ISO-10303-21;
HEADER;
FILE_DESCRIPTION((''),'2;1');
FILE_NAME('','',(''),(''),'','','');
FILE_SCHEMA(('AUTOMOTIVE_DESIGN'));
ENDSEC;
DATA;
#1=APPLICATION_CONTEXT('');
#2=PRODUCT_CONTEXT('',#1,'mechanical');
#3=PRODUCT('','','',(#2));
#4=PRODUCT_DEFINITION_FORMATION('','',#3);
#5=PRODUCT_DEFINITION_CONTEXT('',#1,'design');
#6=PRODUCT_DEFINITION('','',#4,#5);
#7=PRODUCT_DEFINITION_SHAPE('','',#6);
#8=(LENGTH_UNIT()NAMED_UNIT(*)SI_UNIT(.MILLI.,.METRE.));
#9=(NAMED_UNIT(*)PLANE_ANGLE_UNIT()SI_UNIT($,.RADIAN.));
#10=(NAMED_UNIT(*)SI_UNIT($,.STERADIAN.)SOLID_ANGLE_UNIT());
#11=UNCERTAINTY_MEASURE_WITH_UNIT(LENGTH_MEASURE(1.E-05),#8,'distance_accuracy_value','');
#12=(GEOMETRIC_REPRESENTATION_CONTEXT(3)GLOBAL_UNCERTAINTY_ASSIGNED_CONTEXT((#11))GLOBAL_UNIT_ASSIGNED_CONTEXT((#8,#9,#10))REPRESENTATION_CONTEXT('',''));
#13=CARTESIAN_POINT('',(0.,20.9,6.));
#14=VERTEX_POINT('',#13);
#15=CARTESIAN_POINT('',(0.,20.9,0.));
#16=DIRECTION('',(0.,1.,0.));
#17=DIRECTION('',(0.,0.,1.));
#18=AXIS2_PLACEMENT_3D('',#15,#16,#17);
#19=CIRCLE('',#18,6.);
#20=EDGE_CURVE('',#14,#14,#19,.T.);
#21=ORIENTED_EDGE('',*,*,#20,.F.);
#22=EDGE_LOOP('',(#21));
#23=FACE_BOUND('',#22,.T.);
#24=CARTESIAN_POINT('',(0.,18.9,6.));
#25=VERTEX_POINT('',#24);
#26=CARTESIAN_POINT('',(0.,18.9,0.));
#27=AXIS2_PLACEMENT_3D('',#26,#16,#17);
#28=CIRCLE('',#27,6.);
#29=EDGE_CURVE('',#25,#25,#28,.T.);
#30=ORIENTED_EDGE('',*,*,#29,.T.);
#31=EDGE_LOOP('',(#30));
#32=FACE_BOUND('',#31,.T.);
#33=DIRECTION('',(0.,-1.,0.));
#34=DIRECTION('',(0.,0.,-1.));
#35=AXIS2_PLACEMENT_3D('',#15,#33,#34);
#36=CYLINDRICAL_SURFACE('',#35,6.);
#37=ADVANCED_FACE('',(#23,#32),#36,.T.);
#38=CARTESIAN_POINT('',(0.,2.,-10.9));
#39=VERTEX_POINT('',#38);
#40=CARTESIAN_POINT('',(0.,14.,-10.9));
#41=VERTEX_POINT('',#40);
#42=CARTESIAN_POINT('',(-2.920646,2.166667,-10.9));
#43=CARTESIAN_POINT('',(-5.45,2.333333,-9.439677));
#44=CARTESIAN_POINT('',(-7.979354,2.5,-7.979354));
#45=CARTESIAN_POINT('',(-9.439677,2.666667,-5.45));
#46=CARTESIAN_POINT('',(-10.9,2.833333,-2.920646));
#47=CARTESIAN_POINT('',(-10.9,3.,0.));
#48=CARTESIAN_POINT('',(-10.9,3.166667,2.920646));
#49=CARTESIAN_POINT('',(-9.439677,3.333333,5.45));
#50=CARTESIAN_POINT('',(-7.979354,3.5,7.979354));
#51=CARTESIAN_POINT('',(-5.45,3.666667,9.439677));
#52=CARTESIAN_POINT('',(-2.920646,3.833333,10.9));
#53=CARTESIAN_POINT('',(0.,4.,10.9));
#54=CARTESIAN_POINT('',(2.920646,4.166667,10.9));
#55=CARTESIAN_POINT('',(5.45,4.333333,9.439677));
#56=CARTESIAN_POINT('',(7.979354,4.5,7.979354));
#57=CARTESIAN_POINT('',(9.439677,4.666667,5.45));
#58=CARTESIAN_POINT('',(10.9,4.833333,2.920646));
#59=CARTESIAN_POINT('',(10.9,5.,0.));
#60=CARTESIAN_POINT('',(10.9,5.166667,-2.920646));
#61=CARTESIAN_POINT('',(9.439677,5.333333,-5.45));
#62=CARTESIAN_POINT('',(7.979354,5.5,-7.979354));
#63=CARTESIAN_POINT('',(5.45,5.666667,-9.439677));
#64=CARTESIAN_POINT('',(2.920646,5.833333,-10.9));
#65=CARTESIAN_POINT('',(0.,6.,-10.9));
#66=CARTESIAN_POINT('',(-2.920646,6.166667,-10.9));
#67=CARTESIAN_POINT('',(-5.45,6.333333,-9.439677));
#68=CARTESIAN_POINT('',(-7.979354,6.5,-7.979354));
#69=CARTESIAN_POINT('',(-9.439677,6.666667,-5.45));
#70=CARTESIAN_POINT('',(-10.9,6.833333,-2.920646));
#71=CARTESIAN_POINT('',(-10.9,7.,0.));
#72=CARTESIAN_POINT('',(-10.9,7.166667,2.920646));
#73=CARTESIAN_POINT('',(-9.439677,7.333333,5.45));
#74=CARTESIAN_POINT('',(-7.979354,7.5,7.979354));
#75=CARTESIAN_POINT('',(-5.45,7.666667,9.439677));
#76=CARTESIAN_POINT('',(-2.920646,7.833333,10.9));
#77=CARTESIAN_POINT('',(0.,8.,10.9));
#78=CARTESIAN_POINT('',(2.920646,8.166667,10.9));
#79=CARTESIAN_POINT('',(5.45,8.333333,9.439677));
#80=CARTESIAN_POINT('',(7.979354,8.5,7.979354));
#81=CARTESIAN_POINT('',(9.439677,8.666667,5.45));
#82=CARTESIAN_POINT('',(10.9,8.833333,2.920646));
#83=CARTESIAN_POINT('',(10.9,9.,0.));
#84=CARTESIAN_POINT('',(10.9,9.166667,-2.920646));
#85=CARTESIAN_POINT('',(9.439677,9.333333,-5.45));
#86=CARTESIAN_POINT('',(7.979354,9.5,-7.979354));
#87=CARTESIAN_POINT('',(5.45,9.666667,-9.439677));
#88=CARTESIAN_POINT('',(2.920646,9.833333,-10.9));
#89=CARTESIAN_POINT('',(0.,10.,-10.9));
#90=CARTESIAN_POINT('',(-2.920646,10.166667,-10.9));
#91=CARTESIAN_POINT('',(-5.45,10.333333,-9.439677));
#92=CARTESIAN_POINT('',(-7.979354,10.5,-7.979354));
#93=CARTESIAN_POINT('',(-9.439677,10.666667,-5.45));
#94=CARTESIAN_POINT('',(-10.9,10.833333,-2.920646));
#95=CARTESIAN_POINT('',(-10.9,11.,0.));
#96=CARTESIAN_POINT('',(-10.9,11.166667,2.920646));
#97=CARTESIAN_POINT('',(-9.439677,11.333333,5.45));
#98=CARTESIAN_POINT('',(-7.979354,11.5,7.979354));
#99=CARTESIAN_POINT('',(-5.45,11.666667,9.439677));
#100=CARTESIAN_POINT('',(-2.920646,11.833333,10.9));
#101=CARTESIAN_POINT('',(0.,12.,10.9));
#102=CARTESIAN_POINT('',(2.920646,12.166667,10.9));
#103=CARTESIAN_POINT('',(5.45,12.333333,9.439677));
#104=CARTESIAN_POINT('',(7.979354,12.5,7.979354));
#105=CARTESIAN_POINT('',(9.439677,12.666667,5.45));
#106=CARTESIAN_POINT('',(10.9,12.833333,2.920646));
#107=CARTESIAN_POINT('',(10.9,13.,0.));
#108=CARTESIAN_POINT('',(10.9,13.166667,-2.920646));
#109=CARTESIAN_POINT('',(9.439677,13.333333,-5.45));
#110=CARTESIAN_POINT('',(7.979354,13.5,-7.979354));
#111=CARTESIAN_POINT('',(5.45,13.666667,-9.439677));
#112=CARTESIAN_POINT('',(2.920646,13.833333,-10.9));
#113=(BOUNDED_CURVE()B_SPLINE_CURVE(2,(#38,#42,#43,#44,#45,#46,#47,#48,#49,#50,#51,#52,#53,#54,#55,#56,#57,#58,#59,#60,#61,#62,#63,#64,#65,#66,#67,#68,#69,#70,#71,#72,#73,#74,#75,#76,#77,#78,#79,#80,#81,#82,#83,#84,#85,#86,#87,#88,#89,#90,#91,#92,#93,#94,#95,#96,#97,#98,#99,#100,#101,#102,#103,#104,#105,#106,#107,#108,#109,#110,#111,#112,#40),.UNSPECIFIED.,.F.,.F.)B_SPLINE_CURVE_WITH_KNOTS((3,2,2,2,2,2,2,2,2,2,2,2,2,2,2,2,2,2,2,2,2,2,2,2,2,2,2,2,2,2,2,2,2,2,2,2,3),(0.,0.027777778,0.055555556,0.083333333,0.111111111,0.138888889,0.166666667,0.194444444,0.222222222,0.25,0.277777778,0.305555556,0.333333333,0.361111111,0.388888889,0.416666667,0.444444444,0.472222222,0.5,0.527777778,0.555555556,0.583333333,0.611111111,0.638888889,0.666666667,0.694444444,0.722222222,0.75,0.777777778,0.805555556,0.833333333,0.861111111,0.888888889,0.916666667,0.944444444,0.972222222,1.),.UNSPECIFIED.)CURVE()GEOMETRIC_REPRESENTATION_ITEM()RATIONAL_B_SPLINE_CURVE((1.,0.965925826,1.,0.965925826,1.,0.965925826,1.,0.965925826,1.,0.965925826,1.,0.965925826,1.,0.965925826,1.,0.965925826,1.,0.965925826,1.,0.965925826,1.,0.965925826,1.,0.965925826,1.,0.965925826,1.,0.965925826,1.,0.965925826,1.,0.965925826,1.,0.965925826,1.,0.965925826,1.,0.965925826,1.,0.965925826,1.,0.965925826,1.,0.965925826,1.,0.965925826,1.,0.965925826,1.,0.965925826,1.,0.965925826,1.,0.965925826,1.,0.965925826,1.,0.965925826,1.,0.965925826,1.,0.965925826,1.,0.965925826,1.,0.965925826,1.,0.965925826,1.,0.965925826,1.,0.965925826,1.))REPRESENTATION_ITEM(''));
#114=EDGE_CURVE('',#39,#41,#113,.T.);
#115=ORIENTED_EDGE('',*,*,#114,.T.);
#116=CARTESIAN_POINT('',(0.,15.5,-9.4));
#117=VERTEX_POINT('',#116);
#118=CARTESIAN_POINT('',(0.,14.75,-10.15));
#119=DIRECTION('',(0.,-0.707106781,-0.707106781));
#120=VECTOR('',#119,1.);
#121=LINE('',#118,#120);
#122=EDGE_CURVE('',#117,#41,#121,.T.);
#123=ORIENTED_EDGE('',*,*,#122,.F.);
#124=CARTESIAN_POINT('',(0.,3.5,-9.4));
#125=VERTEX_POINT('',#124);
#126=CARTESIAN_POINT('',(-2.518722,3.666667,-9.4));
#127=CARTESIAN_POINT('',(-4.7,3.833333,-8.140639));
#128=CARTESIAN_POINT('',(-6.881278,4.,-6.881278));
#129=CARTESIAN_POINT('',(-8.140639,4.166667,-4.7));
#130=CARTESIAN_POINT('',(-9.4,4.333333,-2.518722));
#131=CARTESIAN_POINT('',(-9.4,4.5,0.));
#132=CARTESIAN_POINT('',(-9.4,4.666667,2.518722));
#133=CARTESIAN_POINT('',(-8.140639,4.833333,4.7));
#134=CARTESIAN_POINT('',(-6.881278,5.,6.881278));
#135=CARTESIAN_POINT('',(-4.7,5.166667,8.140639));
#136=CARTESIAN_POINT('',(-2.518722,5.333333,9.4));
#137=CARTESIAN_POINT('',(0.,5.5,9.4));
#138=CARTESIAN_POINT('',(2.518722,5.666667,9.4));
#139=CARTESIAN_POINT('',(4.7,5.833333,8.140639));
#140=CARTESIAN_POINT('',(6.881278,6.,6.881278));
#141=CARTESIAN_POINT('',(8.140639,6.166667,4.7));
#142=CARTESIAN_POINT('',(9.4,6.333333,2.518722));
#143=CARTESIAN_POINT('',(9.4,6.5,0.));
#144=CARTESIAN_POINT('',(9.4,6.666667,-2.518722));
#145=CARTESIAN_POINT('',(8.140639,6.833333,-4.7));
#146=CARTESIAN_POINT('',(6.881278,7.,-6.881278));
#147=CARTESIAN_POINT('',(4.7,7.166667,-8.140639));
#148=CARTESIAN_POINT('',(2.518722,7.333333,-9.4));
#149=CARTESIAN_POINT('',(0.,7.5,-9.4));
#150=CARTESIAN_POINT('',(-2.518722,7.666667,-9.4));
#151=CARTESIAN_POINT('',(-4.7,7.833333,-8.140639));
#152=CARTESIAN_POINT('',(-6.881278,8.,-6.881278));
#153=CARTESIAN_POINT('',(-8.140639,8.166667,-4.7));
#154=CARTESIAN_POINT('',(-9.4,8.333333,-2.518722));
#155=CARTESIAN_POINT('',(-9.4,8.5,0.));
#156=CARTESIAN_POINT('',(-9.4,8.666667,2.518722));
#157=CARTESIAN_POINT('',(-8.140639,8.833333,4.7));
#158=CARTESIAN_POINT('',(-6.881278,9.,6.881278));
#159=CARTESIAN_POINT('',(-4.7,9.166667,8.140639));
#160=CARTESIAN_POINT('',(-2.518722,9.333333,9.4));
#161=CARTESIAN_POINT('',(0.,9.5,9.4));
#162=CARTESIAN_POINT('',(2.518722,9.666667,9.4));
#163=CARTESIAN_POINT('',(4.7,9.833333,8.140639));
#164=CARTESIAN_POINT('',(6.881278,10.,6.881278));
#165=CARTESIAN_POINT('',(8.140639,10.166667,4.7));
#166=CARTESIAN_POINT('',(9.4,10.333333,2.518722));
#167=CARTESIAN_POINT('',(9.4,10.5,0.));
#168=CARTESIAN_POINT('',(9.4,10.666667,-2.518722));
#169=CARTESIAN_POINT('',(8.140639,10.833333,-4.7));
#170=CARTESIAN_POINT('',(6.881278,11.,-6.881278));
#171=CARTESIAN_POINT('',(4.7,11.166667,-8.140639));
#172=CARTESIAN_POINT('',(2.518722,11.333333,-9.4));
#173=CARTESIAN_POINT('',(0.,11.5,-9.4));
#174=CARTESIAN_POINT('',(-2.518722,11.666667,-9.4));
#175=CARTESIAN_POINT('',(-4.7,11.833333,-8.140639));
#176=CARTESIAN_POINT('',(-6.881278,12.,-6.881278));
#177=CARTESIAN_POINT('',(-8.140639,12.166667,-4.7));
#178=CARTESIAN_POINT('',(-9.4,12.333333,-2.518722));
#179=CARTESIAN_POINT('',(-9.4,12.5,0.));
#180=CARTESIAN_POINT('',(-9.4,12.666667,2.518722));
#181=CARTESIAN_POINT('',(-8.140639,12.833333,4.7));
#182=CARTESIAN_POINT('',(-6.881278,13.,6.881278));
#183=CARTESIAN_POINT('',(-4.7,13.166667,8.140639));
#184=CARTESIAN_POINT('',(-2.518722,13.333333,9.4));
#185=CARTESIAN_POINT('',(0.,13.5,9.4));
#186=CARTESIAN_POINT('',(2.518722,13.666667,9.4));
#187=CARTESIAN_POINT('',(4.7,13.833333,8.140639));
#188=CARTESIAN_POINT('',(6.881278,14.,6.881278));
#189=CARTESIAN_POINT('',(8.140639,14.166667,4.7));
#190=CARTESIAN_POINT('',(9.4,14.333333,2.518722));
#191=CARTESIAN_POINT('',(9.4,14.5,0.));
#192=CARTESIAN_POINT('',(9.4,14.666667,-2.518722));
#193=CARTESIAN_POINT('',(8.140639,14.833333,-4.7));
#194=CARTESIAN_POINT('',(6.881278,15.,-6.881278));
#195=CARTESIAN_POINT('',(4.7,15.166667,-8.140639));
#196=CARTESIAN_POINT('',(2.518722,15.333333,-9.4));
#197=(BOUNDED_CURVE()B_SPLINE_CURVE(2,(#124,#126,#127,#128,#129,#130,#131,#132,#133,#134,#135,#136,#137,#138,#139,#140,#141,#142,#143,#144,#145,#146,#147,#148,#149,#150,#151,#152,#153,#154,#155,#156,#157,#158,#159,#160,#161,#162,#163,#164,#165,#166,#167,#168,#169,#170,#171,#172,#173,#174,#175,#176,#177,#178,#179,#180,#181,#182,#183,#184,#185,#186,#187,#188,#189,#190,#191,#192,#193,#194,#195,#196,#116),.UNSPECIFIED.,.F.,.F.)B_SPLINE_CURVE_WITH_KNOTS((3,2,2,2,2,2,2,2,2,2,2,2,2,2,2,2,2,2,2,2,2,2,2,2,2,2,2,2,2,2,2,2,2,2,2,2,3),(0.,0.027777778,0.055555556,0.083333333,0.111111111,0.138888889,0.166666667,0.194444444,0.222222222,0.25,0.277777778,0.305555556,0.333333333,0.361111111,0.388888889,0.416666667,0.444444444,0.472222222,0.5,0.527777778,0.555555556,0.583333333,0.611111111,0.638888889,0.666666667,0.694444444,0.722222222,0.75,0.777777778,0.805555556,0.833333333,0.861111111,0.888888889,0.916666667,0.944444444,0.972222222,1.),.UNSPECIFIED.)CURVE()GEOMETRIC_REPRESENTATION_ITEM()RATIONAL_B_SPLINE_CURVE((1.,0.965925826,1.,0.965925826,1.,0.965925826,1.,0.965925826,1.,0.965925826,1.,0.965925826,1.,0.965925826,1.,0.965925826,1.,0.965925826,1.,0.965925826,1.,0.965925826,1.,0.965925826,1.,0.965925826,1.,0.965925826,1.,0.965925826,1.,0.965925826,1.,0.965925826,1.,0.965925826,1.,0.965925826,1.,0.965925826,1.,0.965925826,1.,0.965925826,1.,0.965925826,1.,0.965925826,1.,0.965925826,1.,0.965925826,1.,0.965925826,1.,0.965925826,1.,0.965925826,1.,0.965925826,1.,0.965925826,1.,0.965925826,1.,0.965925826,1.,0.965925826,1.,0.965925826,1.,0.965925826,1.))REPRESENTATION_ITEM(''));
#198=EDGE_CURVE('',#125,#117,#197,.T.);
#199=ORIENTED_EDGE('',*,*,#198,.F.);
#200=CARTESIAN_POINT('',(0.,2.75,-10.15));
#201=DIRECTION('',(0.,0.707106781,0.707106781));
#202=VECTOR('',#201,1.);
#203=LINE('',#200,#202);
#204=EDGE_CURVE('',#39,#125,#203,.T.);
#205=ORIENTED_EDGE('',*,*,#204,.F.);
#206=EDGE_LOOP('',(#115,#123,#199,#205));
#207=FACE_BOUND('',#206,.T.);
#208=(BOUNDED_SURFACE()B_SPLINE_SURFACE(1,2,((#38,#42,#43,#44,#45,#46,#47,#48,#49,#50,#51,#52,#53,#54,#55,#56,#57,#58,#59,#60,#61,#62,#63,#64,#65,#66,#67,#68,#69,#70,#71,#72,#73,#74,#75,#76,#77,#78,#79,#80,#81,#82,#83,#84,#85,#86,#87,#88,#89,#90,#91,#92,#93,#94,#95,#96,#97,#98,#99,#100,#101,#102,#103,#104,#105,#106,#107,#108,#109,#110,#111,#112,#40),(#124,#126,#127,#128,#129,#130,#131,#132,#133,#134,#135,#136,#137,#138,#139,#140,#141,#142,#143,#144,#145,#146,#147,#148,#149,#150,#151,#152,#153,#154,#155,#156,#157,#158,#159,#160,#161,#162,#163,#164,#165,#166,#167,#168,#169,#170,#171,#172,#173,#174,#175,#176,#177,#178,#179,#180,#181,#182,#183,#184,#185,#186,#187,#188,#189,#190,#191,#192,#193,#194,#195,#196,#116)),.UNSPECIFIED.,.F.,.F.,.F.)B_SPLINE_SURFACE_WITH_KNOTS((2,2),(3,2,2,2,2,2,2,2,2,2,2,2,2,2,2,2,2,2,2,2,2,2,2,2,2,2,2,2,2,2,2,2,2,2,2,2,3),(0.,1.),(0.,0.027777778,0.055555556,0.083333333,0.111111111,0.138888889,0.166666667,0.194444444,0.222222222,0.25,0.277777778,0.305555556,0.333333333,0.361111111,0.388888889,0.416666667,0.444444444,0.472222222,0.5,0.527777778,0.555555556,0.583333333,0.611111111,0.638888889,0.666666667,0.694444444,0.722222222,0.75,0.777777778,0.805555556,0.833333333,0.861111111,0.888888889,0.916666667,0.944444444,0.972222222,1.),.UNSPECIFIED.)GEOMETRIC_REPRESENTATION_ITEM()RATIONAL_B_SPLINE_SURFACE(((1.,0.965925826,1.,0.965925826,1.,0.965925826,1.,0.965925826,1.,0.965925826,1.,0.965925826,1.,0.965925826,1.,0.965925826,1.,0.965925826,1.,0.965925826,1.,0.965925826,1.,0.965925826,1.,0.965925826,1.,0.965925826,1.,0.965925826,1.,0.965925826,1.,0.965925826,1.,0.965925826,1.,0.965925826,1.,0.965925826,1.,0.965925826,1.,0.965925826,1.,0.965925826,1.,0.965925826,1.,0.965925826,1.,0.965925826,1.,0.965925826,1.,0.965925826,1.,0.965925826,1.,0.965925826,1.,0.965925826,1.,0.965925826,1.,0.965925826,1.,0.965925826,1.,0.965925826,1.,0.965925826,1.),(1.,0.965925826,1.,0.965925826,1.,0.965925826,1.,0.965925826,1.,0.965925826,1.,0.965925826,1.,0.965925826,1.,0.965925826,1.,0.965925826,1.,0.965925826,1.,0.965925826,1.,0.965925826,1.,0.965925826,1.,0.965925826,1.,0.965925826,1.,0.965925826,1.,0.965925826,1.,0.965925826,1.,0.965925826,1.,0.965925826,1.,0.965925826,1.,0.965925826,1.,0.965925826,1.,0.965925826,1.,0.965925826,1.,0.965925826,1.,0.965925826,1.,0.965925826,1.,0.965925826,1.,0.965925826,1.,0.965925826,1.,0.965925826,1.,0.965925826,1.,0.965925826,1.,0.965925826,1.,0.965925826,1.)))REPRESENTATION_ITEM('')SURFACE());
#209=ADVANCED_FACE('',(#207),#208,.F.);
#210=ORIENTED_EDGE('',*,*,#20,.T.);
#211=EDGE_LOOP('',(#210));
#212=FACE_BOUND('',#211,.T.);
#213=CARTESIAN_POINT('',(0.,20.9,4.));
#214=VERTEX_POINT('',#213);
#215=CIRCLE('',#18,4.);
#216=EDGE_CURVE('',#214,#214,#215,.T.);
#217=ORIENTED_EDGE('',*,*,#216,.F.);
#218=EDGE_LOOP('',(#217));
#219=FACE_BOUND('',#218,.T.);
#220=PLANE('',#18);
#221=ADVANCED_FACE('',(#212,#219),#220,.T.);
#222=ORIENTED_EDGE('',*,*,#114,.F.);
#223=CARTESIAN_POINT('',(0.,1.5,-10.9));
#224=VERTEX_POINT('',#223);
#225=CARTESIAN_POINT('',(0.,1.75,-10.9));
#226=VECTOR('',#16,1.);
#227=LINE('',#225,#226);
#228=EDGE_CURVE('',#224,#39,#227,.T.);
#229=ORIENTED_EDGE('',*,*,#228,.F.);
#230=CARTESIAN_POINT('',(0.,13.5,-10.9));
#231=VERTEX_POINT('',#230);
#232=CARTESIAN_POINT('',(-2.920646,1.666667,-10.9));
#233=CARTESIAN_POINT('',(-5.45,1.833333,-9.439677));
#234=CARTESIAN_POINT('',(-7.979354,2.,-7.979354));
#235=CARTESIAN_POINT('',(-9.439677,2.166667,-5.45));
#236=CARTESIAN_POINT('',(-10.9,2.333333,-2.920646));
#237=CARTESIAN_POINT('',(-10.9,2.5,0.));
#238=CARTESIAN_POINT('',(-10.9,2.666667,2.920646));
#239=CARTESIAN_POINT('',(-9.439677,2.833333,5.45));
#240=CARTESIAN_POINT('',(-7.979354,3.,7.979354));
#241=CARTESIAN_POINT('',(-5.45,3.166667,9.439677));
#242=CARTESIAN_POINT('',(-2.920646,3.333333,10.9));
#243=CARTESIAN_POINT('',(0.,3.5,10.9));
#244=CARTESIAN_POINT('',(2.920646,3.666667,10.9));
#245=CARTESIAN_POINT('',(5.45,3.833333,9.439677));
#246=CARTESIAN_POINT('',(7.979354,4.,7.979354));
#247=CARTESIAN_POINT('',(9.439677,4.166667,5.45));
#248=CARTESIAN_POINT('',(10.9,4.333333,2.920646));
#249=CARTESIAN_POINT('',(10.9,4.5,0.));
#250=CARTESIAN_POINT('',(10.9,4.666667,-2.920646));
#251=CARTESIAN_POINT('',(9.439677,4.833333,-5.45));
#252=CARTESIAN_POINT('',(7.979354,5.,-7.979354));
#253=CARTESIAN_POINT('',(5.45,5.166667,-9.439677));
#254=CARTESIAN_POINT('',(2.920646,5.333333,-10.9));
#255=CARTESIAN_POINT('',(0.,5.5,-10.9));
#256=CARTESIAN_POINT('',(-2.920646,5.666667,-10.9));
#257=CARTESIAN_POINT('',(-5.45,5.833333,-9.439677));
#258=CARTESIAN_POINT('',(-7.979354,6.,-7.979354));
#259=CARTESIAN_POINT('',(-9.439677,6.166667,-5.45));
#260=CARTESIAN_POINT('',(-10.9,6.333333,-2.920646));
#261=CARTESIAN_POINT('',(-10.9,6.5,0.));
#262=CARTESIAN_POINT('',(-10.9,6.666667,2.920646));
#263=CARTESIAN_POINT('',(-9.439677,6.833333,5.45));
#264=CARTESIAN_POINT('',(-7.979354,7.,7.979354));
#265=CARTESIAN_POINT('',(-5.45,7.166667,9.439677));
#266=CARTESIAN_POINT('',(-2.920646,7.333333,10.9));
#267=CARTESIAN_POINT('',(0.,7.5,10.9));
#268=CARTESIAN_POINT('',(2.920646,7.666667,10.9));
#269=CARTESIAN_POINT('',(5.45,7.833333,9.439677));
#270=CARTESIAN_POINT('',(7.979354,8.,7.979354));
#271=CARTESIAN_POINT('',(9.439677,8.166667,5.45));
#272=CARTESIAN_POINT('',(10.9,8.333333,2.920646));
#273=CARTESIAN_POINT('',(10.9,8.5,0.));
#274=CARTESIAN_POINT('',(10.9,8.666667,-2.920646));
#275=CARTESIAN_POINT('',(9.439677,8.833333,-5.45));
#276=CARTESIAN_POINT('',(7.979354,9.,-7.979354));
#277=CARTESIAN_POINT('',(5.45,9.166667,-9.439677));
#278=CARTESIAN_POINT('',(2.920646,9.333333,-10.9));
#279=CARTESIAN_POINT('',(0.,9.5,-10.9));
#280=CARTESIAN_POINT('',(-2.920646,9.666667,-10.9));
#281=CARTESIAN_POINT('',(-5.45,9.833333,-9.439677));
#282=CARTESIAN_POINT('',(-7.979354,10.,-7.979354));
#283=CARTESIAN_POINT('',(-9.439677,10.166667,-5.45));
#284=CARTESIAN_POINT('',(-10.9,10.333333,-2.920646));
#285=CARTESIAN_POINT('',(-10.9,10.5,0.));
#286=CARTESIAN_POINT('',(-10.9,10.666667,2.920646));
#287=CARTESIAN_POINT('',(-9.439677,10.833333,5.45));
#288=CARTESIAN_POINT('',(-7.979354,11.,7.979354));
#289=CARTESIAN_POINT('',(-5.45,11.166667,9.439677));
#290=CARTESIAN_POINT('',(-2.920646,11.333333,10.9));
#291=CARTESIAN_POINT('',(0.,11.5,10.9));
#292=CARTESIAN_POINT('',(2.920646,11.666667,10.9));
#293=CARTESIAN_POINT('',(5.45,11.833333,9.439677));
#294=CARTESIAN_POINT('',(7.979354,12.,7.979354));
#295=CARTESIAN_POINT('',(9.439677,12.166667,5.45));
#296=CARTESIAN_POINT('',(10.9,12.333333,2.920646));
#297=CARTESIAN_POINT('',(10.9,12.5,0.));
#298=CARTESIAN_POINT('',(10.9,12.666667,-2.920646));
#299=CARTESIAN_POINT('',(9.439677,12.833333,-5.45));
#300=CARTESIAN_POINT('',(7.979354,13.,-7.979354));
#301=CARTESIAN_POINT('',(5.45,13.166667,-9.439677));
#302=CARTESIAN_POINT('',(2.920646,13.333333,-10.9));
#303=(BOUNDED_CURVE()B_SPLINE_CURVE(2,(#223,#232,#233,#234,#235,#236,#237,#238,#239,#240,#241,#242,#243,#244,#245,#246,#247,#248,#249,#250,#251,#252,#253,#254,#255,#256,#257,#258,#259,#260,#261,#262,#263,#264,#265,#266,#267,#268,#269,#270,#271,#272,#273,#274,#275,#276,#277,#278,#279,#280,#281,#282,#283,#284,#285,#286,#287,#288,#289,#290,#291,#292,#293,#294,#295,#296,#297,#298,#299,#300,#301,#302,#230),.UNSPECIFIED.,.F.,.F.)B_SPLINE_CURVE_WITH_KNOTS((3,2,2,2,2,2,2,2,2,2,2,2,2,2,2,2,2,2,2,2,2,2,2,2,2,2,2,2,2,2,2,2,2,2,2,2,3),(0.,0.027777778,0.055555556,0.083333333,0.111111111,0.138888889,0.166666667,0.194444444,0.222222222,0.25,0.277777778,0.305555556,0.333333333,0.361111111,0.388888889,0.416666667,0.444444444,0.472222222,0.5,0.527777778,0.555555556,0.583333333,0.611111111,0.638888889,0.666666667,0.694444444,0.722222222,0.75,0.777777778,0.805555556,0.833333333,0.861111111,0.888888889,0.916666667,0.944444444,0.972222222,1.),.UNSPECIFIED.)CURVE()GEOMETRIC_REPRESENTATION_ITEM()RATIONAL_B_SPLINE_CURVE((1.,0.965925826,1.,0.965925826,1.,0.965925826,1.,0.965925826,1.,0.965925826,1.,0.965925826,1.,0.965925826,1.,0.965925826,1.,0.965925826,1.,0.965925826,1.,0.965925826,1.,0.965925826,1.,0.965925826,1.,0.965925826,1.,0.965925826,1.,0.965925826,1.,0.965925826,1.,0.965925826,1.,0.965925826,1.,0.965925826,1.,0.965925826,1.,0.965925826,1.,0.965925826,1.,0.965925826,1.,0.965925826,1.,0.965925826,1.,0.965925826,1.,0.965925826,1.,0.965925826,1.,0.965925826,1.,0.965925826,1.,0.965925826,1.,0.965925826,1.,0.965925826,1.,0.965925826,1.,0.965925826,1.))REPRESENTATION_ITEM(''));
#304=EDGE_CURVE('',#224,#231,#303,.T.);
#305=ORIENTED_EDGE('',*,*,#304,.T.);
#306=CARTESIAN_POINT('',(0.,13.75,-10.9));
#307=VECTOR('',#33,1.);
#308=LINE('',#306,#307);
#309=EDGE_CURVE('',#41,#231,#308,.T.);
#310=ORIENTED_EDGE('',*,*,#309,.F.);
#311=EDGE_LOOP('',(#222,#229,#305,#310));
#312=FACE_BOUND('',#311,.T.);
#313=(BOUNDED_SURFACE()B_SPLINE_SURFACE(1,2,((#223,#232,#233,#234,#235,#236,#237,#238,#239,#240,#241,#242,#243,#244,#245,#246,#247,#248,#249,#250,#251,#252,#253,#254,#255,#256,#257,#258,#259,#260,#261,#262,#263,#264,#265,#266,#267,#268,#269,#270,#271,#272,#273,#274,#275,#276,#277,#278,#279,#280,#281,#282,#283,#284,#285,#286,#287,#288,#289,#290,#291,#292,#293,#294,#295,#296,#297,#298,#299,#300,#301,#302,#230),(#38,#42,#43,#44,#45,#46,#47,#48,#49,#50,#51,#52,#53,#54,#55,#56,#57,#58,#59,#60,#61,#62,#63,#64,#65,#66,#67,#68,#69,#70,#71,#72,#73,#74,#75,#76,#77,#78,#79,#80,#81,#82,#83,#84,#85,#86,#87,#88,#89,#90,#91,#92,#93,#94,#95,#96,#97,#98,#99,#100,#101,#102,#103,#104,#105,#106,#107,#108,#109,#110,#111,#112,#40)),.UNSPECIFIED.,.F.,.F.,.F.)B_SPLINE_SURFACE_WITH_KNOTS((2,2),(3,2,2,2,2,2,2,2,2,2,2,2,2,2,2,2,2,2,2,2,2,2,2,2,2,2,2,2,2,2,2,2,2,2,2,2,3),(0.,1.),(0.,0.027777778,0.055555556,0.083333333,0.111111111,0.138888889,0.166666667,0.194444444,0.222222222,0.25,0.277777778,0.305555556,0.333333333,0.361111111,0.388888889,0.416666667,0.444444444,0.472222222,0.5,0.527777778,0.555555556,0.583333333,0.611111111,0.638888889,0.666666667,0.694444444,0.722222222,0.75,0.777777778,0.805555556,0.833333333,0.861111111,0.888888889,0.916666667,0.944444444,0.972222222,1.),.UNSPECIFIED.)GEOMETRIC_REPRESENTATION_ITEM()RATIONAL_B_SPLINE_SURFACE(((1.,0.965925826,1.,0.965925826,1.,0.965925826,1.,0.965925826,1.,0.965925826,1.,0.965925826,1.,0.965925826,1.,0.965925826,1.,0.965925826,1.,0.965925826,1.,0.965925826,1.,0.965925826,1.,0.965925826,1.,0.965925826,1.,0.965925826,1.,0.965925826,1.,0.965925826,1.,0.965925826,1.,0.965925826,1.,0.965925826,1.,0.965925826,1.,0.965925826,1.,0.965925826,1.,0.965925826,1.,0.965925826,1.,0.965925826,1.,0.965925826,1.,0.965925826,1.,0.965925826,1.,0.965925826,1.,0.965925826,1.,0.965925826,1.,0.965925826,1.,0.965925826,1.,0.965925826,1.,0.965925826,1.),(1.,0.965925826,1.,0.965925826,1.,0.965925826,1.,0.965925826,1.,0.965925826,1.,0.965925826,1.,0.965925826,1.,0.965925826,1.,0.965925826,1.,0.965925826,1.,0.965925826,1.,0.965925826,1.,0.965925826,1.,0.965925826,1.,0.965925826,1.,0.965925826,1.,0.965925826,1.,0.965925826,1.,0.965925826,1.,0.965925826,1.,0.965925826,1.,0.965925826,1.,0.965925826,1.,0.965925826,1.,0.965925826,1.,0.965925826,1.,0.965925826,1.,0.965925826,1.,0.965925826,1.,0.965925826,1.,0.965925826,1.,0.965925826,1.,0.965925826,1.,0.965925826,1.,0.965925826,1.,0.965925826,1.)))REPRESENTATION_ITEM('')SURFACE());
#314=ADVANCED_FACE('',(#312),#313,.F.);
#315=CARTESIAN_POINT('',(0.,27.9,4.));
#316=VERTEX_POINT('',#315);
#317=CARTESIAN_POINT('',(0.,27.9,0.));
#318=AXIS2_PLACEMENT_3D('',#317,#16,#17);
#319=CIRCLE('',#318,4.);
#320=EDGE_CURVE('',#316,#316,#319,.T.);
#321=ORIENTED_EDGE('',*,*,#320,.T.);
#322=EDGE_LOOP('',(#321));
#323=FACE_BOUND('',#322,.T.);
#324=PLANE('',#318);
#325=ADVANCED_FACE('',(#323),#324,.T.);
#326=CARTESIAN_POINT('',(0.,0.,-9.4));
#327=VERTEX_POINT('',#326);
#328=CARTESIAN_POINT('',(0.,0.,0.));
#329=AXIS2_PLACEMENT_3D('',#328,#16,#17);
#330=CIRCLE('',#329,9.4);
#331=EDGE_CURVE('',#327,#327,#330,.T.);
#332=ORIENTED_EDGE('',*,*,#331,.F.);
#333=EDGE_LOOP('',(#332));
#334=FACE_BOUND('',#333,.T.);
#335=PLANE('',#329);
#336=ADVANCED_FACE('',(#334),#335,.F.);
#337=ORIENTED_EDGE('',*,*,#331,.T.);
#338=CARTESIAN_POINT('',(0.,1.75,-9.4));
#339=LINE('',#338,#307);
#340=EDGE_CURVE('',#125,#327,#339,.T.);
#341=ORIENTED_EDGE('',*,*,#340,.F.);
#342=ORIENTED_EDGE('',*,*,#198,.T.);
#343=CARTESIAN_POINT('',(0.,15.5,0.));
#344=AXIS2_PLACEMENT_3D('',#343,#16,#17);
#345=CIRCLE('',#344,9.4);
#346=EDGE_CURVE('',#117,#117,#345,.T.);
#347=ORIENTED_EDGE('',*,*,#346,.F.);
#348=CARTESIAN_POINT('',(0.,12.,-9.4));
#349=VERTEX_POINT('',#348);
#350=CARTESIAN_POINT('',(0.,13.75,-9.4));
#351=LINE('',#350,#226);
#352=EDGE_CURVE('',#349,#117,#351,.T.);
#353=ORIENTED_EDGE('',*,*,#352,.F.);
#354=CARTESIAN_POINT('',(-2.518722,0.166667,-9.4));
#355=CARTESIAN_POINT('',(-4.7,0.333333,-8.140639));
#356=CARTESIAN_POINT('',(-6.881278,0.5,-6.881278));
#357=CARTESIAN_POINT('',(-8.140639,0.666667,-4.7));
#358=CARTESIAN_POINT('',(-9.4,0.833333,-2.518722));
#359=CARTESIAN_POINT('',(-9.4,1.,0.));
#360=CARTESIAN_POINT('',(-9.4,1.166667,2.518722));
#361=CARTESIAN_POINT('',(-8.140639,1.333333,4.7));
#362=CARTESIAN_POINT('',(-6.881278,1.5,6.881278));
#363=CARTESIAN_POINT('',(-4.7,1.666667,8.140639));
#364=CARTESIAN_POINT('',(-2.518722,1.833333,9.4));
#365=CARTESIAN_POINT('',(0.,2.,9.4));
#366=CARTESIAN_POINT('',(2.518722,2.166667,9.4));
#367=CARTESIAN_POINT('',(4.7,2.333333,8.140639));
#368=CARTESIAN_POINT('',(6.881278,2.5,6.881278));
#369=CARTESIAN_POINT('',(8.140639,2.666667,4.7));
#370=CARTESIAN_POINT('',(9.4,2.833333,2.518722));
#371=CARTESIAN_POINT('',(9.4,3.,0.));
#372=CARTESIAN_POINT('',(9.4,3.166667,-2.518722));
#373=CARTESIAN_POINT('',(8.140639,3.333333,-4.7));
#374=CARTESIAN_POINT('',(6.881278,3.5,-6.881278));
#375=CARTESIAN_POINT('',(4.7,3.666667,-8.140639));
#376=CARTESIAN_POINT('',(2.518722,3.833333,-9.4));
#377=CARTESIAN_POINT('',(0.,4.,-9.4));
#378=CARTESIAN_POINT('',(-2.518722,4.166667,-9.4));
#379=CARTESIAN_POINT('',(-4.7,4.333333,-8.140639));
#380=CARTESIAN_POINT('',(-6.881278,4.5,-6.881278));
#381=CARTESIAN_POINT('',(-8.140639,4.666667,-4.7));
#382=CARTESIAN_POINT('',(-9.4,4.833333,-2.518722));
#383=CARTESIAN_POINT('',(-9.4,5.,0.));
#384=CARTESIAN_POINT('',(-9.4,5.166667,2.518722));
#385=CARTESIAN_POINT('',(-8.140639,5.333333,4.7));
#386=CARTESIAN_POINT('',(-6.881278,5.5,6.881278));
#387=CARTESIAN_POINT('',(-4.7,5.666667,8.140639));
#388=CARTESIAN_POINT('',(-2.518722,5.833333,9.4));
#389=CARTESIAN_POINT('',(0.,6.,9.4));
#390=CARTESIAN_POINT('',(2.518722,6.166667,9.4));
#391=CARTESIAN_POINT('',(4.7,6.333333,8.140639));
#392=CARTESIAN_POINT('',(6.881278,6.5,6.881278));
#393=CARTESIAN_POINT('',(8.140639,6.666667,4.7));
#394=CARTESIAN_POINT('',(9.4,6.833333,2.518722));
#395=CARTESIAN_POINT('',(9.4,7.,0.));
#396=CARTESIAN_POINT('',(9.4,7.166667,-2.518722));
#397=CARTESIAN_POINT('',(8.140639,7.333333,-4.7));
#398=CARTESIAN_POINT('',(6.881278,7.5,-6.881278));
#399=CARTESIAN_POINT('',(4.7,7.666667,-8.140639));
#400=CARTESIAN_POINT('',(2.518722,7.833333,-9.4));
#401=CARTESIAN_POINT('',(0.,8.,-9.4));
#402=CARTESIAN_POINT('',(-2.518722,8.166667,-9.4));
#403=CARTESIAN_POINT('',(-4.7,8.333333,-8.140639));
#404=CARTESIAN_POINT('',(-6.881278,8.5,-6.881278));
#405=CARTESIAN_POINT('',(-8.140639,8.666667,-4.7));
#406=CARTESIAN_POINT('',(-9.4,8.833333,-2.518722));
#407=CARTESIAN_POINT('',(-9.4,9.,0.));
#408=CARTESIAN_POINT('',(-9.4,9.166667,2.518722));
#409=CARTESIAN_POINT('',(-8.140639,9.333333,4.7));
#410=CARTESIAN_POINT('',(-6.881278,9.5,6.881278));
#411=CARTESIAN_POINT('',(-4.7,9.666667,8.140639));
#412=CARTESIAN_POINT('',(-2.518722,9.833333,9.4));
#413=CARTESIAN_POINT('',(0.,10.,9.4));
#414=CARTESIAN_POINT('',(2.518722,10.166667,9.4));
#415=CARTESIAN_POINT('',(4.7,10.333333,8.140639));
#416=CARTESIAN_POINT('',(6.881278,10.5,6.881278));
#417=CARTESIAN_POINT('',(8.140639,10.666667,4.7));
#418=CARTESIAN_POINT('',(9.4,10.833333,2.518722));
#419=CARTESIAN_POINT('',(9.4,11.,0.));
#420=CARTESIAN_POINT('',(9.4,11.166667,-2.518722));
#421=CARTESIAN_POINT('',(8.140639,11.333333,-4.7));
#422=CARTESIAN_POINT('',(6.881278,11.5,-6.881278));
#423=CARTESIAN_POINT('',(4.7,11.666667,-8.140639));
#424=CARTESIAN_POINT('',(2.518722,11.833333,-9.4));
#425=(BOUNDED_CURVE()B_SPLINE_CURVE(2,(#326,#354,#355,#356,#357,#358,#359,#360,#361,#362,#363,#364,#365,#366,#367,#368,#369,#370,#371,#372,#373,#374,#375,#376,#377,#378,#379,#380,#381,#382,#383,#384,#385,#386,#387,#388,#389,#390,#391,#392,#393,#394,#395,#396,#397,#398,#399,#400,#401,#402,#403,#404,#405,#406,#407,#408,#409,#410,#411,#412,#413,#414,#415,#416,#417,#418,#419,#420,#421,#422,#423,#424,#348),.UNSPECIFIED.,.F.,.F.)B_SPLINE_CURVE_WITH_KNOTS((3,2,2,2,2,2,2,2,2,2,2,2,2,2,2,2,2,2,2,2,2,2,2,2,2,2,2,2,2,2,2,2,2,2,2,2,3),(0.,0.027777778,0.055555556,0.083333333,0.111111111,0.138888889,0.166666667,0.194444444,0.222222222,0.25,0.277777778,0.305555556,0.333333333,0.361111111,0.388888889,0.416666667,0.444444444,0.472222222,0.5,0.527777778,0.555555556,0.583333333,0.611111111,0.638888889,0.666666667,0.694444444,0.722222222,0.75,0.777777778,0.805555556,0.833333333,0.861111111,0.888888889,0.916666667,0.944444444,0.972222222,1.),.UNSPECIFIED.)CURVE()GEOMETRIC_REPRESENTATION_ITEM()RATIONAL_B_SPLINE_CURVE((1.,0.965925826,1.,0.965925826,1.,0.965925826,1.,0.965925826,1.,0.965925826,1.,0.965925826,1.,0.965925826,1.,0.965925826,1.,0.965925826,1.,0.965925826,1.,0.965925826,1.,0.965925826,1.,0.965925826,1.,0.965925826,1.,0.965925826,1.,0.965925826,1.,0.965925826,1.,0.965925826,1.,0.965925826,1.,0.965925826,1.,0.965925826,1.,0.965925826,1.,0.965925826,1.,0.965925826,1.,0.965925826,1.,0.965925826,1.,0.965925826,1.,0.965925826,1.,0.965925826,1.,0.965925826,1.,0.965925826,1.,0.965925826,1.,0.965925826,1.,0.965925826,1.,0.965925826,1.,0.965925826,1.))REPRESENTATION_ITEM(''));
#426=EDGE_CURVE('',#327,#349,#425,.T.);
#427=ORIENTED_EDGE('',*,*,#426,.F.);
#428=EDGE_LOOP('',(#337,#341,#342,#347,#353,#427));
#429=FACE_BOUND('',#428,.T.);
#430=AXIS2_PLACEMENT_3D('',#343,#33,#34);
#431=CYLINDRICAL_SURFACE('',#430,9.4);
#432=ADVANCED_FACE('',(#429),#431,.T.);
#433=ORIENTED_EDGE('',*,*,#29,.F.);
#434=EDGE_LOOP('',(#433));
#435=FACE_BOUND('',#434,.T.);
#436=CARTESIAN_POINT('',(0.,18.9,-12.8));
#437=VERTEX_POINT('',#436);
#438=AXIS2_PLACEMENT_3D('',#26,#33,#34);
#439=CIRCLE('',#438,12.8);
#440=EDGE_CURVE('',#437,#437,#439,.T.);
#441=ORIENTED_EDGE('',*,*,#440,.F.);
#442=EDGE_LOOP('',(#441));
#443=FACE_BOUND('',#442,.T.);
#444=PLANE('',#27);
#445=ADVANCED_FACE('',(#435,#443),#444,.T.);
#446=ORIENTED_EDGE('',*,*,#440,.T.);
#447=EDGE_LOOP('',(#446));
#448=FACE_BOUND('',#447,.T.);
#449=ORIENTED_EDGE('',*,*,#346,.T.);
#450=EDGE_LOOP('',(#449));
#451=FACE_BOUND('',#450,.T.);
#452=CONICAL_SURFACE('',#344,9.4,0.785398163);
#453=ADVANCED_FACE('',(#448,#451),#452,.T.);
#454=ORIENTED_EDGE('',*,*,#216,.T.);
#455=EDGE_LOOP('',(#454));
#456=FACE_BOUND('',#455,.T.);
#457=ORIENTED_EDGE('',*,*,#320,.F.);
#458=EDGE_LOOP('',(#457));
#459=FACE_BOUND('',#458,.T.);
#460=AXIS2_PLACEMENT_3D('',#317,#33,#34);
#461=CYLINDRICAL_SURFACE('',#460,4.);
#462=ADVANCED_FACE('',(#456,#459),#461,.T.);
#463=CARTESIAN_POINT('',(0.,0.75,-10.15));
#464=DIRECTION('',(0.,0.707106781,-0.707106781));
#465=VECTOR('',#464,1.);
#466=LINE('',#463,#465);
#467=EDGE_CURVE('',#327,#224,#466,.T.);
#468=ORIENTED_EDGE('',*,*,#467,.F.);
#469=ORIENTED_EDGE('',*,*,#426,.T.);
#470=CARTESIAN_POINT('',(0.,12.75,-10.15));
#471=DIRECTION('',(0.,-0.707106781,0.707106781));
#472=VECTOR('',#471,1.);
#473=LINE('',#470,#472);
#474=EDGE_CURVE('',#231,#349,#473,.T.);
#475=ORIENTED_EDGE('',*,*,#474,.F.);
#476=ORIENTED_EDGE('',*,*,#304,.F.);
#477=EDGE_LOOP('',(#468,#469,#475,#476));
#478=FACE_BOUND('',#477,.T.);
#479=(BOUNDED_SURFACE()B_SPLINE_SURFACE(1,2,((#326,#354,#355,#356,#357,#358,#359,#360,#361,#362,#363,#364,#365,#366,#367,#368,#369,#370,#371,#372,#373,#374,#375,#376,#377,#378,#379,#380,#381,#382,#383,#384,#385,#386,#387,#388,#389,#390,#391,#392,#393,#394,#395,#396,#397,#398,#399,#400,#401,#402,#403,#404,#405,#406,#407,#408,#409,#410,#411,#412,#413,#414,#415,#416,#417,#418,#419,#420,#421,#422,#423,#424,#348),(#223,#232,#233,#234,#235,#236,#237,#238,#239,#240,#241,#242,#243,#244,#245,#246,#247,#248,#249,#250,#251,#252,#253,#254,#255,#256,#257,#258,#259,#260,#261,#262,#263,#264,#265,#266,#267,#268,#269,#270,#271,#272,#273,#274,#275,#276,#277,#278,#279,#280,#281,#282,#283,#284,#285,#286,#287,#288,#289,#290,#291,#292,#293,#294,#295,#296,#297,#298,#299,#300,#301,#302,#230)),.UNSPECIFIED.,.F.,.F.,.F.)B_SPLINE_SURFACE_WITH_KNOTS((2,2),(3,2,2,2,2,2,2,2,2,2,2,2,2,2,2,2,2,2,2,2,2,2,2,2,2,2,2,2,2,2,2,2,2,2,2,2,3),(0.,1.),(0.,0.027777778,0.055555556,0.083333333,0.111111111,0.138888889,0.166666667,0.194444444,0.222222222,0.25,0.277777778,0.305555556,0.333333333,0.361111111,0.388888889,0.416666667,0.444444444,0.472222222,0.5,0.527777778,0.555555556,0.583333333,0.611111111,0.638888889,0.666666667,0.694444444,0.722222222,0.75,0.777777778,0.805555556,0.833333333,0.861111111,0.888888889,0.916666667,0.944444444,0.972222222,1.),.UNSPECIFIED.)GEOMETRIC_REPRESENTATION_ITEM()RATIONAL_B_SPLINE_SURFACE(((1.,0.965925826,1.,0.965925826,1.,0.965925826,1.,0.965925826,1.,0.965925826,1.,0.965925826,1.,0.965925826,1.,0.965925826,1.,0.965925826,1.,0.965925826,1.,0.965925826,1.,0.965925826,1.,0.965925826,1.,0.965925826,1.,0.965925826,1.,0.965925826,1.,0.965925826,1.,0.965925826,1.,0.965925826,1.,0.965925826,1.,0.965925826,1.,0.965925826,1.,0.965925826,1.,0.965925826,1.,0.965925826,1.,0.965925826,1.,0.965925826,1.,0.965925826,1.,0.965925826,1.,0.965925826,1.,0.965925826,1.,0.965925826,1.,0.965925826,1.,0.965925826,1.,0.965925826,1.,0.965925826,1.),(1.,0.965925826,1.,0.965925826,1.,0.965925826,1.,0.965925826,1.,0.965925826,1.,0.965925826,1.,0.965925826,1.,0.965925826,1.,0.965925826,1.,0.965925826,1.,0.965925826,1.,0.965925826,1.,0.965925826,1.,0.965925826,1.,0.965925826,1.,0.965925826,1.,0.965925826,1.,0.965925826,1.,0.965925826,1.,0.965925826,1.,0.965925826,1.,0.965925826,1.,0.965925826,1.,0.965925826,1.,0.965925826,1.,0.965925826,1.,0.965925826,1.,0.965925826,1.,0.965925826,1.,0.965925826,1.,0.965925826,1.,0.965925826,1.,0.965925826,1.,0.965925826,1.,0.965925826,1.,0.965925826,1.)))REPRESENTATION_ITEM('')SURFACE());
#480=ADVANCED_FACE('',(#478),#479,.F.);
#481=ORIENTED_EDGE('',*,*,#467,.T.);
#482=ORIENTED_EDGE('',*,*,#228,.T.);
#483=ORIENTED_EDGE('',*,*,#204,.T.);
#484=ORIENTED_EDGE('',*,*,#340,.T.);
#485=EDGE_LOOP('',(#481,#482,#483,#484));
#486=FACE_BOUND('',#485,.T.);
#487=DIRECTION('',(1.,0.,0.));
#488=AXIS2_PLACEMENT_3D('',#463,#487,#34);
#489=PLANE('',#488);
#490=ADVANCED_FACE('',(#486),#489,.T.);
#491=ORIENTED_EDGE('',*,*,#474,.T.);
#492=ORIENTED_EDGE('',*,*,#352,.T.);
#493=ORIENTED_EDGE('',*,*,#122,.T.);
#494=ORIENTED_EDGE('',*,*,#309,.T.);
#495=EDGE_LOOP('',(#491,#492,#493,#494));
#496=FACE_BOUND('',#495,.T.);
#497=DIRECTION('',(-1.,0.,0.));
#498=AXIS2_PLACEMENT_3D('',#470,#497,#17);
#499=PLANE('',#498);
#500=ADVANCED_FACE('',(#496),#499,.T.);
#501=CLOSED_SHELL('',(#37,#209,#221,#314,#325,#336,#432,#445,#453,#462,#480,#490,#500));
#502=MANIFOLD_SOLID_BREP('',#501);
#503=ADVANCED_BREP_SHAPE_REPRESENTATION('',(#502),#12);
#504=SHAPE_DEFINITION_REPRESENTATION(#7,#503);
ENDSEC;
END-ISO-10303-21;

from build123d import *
from build123d.topology import SkipClean

# Parameters (mm, degrees)
SKETCH_1_R      = 9.4
EXTRUDE_1_DEPTH = 15.5
SKETCH_3_R      = 6
EXTRUDE_2_DEPTH = 2
SKETCH_4_R      = 4
EXTRUDE_3_DEPTH = 7
SWEEP_1_PITCH   = 4


with BuildPart() as part:
    # 草图1 → 凸台-拉伸1 (new body)
    with BuildSketch(Plane(origin=(0, 0, 0), x_dir=(1, 0, 0), z_dir=(0, 1, 0))):
        with Locations(Location((0, 0, 0), (0, 0, 270))):
            Circle(SKETCH_1_R)
    extrude(amount=EXTRUDE_1_DEPTH)

    # 草图2 → 旋转1 (revolve)
    with BuildSketch(Plane.XY, mode=Mode.PRIVATE) as revolve_1_sk:
        Polygon((0, 18.9), (12.8, 18.9), (9.4, 15.5), (0, 15.5), align=None)
    revolve(revolve_1_sk.sketch.rotate(Axis((0, 15.5, 0), (0, 1, 0)), 270), axis=Axis((0, 15.5, 0), (0, 1, 0)))

    # 草图3 → 凸台-拉伸2 (add)
    with BuildSketch(Plane(origin=(0, 18.9, 0), x_dir=(1, 0, 0), z_dir=(0, 1, 0))):
        with Locations(Location((0, 0, 0), (0, 0, 270))):
            Circle(SKETCH_3_R)
    extrude(amount=EXTRUDE_2_DEPTH)

    # 草图4 → 凸台-拉伸3 (add)
    with BuildSketch(Plane(origin=(0, 20.9, 0), x_dir=(1, 0, 0), z_dir=(0, 1, 0))):
        with Locations(Location((0, 0, 0), (0, 0, 270))):
            Circle(SKETCH_4_R)
    extrude(amount=EXTRUDE_3_DEPTH)

    # 扫描1: the profile of 草图8 profile screwed along a right-hand helix of 3 turns, 12 arcs to a turn; built about Z, then put on its axis
    with SkipClean():  # the faces are left unmerged after this step: merging them gives an invalid solid
        sweep_1_z = Axis((0, 0, 0), (0, 0, 1))
        sweep_1_corners = [(9.3997, 0, 1.7503), (9.3997, 0, -1.7503), (10.9, 0, -0.25), (10.9, 0, 0.25)]
        with BuildLine(mode=Mode.PRIVATE) as sweep_1_profile:
            Line(sweep_1_corners[0], sweep_1_corners[1])
            Line(sweep_1_corners[1], sweep_1_corners[2])
            Line(sweep_1_corners[2], sweep_1_corners[3])
            Line(sweep_1_corners[3], sweep_1_corners[0])
        sweep_1_cap = Face(sweep_1_profile.wire())
        sweep_1_turn_angles = [0, 15, 30, 45, 60, 75, 90, 105, 120, 135, 150, 165, 180, 195, 210, 225, 240, 255, 270, 285, 300, 315, 330, 345, 360]
        sweep_1_turn_weights = [1, 0.9659258262890683, 1, 0.9659258262890683, 1, 0.9659258262890683, 1, 0.9659258262890683, 1, 0.9659258262890683, 1, 0.9659258262890683, 1, 0.9659258262890683, 1, 0.9659258262890683, 1, 0.9659258262890683, 1, 0.9659258262890683, 1, 0.9659258262890683, 1, 0.9659258262890683, 1]
        sweep_1_turn_rails = [Edge.make_bspline([Vector(p[0], p[1], 0).rotate(sweep_1_z, sweep_1_turn_angles[k]) / sweep_1_turn_weights[k] + Vector(0, 0, p[2] + SWEEP_1_PITCH * sweep_1_turn_angles[k] / 360) for k in range(25)], [0, 0, 0, 1, 1, 2, 2, 3, 3, 4, 4, 5, 5, 6, 6, 7, 7, 8, 8, 9, 9, 10, 10, 11, 11, 12, 12, 12], 2, sweep_1_turn_weights) for p in sweep_1_corners]
        sweep_1_turn_sides = [Face.make_surface_from_curves(sweep_1_turn_rails[p[0]], sweep_1_turn_rails[p[1]]) for p in [(0, 1), (1, 2), (2, 3), (3, 0)]]
        sweep_1 = Plane(origin=(0, 1.75, 0), x_dir=(0, 0, -1), z_dir=(0, 1, 0)) * Solid(Shell([*[p.moved(Location((0, 0, SWEEP_1_PITCH * i))) for i in range(3) for p in sweep_1_turn_sides], sweep_1_cap, sweep_1_cap.rotate(sweep_1_z, 1080).moved(Location((0, 0, SWEEP_1_PITCH * 1080 / 360)))]))
        add(sweep_1)


solid = part.part
